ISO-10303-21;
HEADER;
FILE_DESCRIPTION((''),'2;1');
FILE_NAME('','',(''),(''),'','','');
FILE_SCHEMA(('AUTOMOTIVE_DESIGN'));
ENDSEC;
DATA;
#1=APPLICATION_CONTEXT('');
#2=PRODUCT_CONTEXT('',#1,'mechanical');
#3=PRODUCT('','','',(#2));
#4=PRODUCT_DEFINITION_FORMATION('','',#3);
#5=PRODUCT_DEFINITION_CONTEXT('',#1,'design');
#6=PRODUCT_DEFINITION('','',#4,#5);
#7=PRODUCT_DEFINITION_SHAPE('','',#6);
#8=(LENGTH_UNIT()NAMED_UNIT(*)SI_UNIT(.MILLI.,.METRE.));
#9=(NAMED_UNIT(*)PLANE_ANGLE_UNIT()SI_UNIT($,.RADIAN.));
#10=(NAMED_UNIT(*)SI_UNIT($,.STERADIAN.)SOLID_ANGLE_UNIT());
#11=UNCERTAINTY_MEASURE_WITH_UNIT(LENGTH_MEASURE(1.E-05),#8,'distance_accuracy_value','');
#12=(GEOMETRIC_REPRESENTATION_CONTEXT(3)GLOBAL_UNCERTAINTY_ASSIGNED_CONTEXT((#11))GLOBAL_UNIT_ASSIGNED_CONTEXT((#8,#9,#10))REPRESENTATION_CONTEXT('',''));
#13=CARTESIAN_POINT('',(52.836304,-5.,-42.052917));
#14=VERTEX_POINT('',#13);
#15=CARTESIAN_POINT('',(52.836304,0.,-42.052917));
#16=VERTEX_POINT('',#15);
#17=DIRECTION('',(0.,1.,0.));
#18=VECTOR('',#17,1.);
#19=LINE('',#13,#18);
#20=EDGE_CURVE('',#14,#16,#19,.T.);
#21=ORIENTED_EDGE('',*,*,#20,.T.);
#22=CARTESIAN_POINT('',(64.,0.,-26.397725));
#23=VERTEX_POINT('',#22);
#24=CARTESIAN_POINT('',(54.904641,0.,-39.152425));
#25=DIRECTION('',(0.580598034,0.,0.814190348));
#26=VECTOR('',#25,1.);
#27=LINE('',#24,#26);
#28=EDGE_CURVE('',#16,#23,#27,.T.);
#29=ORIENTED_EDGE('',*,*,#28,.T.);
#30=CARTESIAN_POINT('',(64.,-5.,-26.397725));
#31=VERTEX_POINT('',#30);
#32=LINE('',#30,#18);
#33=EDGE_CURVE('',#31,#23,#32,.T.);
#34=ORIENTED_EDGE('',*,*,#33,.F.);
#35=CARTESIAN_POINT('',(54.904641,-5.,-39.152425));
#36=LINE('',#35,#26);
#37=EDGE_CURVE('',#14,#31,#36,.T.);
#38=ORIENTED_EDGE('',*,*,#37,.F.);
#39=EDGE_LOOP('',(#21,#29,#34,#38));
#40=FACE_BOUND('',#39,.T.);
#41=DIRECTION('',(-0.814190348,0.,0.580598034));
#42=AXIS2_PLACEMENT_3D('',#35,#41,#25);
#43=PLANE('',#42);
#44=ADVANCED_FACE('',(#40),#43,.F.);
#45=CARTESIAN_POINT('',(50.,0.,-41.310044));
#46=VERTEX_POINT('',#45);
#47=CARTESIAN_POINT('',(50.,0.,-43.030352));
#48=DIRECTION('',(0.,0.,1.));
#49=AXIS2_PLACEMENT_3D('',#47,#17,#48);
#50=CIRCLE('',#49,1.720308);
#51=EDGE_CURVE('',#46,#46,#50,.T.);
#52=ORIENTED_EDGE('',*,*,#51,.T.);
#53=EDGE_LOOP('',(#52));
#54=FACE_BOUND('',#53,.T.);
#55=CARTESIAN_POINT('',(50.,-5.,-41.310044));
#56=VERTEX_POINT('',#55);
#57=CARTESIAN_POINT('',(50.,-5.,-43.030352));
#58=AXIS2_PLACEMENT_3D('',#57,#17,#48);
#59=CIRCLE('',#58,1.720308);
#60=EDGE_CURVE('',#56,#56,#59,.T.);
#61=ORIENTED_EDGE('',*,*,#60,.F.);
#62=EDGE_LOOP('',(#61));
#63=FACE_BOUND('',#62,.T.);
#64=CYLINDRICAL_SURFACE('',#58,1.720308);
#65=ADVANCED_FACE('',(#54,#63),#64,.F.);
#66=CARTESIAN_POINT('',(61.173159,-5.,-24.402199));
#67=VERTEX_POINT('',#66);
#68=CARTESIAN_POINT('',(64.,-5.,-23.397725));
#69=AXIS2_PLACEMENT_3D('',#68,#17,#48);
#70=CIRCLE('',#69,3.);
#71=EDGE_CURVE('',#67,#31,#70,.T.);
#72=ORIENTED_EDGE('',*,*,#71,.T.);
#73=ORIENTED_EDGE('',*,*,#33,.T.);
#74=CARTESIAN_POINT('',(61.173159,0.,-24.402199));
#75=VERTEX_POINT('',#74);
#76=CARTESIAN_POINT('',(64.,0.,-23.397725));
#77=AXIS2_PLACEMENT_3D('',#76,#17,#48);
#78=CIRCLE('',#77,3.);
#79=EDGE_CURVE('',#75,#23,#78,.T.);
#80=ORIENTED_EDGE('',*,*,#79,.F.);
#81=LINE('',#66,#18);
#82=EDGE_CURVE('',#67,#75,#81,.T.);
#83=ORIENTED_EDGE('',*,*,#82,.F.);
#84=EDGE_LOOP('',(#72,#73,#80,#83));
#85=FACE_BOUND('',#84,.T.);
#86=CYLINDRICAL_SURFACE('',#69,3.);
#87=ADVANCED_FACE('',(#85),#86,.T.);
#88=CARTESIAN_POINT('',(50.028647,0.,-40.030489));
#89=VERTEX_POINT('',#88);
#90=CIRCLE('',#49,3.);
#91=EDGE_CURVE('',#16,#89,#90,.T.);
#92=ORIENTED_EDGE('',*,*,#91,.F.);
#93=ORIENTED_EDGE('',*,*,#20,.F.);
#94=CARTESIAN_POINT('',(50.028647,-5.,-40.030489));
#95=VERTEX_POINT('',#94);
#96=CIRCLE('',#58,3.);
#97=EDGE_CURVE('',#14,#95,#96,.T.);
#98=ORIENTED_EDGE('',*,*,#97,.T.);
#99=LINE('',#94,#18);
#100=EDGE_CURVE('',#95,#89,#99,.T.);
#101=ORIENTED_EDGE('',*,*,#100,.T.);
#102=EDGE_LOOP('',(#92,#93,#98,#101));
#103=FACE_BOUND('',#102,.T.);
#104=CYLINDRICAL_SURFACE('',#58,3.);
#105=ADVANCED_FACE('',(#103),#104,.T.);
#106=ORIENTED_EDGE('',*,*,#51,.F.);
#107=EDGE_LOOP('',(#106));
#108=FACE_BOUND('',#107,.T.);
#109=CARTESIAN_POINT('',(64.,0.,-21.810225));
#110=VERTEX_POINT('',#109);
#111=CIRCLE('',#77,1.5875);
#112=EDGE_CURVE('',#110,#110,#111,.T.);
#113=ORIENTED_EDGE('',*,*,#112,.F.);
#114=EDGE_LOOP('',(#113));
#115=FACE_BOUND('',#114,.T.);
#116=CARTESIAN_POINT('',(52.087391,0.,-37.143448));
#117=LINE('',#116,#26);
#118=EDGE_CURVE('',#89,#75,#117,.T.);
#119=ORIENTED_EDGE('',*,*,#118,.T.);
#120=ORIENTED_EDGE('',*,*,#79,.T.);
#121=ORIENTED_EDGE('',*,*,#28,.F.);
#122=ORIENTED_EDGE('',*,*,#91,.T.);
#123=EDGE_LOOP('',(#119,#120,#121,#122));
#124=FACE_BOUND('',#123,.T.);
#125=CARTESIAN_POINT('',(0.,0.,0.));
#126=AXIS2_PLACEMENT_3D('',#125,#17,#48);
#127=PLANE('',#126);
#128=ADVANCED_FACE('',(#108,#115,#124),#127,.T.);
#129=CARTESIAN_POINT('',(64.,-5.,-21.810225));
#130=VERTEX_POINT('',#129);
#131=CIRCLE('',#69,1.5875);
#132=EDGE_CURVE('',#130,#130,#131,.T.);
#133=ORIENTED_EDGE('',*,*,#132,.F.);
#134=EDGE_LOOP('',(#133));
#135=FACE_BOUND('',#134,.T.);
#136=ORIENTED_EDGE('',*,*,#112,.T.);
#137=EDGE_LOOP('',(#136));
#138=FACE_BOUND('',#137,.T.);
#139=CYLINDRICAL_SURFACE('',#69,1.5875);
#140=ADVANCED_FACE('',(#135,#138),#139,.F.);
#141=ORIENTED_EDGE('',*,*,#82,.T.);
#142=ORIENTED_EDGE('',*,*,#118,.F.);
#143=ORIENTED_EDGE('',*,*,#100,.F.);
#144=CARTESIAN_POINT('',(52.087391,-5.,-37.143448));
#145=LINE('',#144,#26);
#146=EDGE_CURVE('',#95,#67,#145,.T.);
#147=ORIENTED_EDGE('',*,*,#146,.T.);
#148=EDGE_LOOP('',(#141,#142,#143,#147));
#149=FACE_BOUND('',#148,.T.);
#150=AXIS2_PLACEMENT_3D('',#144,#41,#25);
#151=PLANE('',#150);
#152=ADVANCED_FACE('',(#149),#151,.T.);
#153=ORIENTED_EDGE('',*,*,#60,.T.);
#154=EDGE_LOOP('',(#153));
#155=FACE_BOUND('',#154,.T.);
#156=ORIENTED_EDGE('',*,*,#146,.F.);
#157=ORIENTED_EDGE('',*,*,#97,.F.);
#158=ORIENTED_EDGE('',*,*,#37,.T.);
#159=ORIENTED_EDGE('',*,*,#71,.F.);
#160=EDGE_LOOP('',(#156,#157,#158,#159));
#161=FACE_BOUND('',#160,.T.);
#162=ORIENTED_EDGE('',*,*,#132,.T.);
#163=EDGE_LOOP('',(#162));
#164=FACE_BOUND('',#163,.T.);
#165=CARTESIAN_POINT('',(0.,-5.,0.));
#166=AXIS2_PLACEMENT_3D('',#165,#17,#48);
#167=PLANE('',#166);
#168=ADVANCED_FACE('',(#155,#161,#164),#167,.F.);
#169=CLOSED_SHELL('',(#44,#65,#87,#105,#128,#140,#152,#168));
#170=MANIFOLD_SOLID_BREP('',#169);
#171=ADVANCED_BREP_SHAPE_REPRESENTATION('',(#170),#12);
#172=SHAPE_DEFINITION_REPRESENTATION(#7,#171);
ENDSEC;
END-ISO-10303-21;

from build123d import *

# Parameters (mm, degrees)
CROQUIS2_R              = 1.720307827
CROQUIS2_R_2            = 1.5875
SALIENTE_EXTRUIR1_DEPTH = 5


with BuildPart() as part:
    # Croquis2 → Saliente-Extruir1 (new body)
    with BuildSketch(Plane(origin=(0, 0, 0), x_dir=(1, 0, 0), z_dir=(0, 1, 0))):
        with BuildLine():
            Line((50.028646758, 40.030488864), (61.173158874, 24.402199283))
            ThreePointArc((61.173158874, 24.402199283), (65.730112158, 20.946865244), (64, 26.397724669))
            Line((64, 26.397724669), (52.836303892, 42.052916548))
            ThreePointArc((52.836303892, 42.052916548), (48.246563662, 45.464579071), (50.028646758, 40.030488864))
        make_face()
        with Locations((50, 43.030352088)):
            Circle(CROQUIS2_R, mode=Mode.SUBTRACT)
        with Locations((64, 23.397724669)):
            Circle(CROQUIS2_R_2, mode=Mode.SUBTRACT)
    extrude(amount=-SALIENTE_EXTRUIR1_DEPTH)


solid = part.part
